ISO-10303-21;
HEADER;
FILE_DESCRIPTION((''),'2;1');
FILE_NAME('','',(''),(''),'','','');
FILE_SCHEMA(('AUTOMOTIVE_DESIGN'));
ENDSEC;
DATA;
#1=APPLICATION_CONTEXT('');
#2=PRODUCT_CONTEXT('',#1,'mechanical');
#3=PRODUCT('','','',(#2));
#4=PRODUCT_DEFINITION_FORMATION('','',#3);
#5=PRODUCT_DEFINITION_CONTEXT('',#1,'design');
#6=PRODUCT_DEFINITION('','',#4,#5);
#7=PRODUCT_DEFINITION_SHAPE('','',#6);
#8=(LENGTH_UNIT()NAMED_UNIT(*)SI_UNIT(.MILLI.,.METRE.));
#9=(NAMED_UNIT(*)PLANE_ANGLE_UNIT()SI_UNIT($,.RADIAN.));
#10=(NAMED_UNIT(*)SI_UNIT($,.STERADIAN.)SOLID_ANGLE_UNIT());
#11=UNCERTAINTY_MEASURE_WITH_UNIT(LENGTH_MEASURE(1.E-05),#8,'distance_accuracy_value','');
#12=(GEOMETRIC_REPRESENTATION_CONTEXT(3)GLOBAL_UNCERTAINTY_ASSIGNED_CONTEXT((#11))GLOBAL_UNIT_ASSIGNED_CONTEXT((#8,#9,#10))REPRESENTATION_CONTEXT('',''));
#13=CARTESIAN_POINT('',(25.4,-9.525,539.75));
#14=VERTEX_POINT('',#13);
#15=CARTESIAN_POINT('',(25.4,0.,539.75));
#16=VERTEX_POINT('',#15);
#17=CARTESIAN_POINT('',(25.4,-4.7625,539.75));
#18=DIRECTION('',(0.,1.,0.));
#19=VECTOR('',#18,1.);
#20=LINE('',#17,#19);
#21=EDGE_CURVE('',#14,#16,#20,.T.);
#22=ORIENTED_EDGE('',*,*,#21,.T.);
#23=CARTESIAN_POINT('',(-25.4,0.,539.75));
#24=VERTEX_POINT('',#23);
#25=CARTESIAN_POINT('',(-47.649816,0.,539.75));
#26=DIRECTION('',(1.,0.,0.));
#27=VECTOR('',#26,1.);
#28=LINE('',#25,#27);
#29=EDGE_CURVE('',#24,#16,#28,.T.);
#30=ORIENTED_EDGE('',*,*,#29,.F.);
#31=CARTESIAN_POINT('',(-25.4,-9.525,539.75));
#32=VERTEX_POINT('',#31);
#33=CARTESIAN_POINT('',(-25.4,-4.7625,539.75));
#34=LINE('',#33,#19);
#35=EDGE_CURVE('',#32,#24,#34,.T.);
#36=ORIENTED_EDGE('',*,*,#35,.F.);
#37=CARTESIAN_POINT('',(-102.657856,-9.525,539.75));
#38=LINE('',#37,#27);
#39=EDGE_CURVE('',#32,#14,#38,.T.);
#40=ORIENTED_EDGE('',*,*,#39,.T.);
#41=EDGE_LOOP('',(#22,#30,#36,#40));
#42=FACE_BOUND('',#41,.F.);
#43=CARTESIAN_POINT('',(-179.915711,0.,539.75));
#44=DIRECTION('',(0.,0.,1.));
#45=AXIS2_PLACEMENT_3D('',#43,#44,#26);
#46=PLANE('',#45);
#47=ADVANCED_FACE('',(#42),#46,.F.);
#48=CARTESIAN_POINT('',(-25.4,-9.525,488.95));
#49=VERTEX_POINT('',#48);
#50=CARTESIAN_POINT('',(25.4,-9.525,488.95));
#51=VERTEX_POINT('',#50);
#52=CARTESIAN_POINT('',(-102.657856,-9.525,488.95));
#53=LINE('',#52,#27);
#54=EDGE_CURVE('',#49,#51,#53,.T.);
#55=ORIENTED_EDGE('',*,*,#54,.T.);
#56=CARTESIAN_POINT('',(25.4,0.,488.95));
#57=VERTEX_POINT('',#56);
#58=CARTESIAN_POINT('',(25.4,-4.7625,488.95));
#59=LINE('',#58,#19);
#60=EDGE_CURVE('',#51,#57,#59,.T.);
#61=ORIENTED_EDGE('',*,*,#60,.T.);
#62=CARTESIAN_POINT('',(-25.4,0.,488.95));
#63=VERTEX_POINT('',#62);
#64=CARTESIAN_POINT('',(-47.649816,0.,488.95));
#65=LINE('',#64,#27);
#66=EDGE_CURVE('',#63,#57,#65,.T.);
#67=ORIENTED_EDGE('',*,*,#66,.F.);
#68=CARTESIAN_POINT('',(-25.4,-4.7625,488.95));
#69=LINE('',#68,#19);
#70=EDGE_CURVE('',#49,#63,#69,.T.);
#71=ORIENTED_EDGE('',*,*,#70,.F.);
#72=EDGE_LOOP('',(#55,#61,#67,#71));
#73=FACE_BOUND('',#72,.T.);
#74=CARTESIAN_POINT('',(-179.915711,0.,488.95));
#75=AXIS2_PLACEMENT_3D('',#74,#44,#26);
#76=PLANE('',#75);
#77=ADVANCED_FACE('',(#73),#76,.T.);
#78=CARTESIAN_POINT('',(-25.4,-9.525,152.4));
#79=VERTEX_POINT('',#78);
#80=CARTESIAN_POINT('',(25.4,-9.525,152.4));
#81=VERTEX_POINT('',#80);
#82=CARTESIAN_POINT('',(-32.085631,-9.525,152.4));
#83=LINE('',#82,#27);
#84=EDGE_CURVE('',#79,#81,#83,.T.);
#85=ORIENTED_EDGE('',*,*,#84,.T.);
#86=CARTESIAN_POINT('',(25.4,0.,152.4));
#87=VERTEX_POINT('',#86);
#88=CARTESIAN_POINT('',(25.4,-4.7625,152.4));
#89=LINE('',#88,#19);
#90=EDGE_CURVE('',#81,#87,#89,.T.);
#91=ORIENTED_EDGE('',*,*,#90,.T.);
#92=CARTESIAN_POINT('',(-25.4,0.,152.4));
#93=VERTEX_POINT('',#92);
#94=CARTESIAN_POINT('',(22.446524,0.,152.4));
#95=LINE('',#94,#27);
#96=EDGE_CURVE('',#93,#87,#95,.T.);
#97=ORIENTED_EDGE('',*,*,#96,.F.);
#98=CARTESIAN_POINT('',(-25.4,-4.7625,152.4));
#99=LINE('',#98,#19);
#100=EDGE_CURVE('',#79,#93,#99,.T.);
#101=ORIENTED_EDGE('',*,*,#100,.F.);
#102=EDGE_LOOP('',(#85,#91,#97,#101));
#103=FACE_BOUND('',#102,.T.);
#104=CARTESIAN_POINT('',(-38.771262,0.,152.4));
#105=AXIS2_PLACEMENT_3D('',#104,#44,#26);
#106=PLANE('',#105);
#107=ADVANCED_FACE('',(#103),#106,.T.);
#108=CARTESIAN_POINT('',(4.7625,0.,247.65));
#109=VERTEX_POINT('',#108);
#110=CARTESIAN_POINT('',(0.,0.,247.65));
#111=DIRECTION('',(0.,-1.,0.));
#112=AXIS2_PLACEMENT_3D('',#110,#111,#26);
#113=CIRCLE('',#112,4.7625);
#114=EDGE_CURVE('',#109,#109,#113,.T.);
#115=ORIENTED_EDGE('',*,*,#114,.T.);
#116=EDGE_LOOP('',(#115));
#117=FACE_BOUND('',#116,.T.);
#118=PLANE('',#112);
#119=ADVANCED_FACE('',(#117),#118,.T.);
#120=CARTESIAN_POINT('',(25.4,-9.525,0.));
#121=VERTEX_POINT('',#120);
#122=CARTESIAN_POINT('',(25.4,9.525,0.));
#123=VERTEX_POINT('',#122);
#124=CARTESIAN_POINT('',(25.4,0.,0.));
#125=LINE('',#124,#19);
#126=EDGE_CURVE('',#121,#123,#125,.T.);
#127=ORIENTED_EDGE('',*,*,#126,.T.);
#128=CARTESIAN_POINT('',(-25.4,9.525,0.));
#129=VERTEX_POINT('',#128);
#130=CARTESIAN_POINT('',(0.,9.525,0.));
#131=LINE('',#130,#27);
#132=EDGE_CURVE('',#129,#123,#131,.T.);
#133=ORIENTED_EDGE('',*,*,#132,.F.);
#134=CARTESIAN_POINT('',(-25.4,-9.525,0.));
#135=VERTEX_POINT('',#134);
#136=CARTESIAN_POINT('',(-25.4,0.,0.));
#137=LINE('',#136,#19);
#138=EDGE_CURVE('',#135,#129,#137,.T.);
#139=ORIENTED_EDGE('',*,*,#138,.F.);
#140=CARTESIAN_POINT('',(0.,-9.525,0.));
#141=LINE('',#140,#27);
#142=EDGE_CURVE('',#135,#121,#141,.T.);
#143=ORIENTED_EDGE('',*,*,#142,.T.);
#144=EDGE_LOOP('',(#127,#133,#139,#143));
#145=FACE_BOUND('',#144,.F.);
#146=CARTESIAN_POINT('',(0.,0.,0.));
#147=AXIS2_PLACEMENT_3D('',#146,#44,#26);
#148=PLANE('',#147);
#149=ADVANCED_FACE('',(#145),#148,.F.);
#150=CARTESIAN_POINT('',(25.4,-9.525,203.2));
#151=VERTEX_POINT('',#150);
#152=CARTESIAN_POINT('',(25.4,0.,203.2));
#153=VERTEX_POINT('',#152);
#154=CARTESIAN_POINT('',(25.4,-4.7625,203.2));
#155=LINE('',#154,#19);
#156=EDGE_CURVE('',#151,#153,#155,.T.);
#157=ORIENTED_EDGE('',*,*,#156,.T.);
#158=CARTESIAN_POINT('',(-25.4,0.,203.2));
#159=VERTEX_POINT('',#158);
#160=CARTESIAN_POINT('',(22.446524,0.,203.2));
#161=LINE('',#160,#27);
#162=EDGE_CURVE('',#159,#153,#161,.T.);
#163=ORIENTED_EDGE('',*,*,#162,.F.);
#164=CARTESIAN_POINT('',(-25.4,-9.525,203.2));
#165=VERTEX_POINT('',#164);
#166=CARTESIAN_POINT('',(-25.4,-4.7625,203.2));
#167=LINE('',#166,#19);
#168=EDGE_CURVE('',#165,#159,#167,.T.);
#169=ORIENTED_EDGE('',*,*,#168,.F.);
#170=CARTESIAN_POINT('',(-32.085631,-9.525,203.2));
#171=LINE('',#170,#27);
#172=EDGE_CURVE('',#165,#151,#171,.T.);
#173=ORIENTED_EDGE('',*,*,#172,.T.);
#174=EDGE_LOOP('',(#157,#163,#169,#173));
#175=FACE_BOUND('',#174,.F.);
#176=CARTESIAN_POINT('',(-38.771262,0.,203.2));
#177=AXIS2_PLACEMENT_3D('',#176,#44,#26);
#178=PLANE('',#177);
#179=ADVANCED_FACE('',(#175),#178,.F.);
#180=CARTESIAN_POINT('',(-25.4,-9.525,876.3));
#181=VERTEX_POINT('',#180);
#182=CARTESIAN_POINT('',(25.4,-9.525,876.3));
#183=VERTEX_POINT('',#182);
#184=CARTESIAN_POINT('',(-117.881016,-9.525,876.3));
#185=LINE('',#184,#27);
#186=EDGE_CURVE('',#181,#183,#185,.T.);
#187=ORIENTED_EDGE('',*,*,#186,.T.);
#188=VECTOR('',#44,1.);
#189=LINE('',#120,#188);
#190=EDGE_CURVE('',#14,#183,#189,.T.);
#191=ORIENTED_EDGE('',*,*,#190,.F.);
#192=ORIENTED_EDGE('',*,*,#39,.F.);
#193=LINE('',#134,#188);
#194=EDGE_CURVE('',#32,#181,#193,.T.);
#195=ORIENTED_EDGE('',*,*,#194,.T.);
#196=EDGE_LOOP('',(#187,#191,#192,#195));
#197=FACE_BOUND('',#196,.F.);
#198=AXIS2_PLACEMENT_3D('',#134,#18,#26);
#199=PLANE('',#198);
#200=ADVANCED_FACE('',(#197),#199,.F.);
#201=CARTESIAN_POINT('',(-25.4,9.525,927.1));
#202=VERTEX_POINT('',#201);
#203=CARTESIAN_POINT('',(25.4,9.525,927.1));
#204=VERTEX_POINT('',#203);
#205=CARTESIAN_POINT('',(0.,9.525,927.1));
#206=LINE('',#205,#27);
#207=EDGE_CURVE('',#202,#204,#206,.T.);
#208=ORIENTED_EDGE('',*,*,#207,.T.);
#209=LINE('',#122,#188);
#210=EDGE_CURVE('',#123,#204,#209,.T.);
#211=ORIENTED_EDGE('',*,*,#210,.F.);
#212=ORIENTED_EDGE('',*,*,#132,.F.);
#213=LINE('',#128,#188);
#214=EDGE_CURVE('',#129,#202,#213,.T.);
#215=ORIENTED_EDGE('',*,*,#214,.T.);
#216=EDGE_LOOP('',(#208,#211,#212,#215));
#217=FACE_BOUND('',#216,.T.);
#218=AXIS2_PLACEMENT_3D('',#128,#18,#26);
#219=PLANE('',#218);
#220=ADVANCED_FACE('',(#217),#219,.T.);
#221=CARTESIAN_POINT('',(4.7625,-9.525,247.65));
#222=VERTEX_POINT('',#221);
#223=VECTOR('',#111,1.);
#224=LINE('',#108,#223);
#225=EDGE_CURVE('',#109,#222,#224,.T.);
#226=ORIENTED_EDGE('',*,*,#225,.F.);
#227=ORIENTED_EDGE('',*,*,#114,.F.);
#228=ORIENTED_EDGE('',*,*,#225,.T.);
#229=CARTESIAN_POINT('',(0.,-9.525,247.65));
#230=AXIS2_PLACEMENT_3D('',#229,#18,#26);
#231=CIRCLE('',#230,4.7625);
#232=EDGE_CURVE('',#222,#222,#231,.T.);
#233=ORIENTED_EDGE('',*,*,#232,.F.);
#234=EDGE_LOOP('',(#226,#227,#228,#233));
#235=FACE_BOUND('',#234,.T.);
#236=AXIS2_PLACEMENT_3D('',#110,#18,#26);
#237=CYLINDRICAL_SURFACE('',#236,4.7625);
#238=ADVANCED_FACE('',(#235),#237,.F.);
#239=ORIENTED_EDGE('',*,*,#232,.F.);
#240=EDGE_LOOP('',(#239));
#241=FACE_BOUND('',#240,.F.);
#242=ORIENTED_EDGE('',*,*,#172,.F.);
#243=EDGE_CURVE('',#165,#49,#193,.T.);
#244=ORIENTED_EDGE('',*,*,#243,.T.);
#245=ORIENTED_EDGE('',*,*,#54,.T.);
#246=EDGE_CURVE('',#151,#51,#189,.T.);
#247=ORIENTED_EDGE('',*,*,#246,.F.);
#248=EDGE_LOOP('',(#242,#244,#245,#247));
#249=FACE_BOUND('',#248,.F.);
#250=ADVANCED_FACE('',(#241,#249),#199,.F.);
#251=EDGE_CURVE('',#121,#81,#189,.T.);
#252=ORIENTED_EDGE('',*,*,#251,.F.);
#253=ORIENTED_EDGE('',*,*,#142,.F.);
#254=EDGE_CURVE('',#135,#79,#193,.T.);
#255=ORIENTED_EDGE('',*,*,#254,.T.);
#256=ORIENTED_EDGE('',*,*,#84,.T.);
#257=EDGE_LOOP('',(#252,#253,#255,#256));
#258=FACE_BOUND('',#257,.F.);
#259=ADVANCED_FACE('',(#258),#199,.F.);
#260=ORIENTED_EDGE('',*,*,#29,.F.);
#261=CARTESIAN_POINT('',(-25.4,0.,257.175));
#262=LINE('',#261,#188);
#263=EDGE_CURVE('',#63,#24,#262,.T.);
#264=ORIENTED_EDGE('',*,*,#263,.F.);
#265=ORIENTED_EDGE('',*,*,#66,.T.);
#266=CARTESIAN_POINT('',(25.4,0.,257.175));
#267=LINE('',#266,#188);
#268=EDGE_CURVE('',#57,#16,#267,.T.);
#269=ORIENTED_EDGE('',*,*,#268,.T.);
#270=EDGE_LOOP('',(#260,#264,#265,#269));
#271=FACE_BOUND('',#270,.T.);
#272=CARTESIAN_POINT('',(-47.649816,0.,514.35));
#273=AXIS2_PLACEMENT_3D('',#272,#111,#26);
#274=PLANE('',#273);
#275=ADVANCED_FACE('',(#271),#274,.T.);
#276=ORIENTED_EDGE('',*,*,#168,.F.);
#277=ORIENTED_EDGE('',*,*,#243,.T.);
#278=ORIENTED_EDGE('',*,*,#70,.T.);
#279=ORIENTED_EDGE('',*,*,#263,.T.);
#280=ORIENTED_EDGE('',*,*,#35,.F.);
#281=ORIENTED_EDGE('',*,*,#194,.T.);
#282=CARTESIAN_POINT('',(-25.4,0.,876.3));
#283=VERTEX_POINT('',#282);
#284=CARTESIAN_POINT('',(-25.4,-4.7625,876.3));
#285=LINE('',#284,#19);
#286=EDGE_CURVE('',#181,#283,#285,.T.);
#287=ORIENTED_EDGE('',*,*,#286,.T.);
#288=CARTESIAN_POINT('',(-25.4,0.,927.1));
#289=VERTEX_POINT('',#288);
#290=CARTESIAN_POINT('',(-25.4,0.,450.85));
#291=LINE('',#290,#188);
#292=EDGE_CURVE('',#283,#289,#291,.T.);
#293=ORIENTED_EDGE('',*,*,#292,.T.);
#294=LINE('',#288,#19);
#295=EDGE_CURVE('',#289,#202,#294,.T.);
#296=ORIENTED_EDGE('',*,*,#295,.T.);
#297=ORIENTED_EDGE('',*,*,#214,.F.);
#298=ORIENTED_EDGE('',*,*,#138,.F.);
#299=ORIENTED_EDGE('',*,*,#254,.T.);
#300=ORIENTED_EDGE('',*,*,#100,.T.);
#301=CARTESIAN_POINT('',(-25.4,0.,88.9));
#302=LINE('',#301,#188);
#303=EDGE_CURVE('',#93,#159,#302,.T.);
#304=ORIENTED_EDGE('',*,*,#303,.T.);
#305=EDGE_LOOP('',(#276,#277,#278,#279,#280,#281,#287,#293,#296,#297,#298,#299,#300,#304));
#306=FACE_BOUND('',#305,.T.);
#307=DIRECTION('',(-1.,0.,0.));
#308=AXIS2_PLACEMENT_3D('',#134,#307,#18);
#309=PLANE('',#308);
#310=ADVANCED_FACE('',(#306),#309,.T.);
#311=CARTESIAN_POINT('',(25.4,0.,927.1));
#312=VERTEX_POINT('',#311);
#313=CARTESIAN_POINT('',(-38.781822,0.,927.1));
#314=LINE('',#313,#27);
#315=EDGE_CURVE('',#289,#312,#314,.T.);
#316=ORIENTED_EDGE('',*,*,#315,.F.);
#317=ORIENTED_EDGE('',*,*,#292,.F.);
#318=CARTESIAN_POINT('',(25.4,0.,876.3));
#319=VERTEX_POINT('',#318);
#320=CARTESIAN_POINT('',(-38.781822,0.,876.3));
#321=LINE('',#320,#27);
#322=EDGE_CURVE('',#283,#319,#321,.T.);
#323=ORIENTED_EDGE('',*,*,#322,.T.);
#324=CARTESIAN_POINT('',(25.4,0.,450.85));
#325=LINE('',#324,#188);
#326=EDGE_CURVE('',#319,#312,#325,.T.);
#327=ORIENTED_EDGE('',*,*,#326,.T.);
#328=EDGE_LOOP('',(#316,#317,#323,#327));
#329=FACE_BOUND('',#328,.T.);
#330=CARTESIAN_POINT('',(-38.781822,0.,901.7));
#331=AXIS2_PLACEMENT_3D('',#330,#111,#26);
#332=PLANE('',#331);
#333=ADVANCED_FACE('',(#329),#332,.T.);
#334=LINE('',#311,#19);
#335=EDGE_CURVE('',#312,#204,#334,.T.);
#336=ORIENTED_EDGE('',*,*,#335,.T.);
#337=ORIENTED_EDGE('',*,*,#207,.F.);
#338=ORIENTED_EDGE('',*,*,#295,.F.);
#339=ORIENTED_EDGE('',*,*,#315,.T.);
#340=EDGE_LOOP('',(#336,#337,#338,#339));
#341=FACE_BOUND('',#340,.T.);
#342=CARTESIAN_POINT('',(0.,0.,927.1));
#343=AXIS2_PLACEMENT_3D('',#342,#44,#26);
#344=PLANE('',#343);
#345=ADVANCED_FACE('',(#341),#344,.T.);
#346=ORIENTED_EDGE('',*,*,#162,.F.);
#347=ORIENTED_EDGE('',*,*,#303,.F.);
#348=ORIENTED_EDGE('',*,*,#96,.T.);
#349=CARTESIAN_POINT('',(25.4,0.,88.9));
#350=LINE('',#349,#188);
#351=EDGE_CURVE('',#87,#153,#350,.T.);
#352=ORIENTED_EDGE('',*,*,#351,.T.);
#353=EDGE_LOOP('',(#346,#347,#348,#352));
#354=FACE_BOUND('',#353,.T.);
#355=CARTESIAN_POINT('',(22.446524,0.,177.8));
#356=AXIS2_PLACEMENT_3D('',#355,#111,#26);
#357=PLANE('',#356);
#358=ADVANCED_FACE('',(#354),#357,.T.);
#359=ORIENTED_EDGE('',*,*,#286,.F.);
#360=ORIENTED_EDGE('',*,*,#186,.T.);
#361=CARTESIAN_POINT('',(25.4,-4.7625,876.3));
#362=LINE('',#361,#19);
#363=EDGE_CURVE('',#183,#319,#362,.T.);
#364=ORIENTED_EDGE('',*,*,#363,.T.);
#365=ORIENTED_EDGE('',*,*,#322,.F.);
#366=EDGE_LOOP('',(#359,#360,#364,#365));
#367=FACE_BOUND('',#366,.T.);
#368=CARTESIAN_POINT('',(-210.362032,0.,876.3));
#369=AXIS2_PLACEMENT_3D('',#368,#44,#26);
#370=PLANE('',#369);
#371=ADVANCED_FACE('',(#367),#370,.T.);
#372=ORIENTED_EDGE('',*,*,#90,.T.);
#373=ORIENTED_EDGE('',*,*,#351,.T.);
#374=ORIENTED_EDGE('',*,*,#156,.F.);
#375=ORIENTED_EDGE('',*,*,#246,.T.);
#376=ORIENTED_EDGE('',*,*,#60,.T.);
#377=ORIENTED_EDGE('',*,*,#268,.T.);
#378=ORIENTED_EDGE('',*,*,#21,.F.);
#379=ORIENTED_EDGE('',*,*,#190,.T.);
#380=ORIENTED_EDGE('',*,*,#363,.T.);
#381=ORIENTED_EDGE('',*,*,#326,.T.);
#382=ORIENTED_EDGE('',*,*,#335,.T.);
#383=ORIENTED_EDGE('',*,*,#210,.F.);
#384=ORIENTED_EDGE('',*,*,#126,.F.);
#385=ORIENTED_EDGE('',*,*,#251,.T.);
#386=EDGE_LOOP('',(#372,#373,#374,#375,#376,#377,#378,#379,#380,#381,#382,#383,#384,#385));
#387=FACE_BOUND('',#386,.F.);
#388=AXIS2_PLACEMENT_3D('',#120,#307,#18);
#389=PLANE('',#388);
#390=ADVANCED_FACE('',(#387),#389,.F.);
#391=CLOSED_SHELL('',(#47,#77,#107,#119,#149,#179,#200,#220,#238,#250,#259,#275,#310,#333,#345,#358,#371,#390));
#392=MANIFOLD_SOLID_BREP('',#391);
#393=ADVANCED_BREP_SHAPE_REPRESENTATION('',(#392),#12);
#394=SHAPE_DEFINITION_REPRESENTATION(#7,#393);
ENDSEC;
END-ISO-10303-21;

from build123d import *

# Parameters (mm, degrees)
F0_W     = 50.8
F0_H     = 19.05
F1_DEPTH = 927.1
F2_W     = 122.43557321
F2_H     = 50.8
F2_W_2   = 343.1604206562
F2_W_3   = 264.5317912102
F3_DEPTH = 25.4
F4_R     = 4.7625
F5_DEPTH = 25.4


# Not quite as in the source:
# - a feature names something its author has since deleted; it is built from what else it names


with BuildPart() as f1:
    # F0 (on Top) → F1 (new body)
    with BuildSketch(Plane.XY):
        Rectangle(F0_W, F0_H)
    extrude(amount=F1_DEPTH)

    # F2 (on Front) → F3 (cut)
    with BuildSketch(Plane.XZ):
        with Locations((22.4465244144, 177.8)):
            Rectangle(F2_W, F2_H)
        with Locations((-38.7818217278, 901.7)):
            Rectangle(F2_W_2, F2_H)
        with Locations((-47.6498156786, 514.35)):
            Rectangle(F2_W_3, F2_H)
    extrude(amount=F3_DEPTH, mode=Mode.SUBTRACT)

    # F4 (on Front) → F5 (cut)
    with BuildSketch(Plane.XZ):
        with Locations((0, 247.65)):
            Circle(F4_R)
    extrude(amount=F5_DEPTH, mode=Mode.SUBTRACT)


solid = f1.part
